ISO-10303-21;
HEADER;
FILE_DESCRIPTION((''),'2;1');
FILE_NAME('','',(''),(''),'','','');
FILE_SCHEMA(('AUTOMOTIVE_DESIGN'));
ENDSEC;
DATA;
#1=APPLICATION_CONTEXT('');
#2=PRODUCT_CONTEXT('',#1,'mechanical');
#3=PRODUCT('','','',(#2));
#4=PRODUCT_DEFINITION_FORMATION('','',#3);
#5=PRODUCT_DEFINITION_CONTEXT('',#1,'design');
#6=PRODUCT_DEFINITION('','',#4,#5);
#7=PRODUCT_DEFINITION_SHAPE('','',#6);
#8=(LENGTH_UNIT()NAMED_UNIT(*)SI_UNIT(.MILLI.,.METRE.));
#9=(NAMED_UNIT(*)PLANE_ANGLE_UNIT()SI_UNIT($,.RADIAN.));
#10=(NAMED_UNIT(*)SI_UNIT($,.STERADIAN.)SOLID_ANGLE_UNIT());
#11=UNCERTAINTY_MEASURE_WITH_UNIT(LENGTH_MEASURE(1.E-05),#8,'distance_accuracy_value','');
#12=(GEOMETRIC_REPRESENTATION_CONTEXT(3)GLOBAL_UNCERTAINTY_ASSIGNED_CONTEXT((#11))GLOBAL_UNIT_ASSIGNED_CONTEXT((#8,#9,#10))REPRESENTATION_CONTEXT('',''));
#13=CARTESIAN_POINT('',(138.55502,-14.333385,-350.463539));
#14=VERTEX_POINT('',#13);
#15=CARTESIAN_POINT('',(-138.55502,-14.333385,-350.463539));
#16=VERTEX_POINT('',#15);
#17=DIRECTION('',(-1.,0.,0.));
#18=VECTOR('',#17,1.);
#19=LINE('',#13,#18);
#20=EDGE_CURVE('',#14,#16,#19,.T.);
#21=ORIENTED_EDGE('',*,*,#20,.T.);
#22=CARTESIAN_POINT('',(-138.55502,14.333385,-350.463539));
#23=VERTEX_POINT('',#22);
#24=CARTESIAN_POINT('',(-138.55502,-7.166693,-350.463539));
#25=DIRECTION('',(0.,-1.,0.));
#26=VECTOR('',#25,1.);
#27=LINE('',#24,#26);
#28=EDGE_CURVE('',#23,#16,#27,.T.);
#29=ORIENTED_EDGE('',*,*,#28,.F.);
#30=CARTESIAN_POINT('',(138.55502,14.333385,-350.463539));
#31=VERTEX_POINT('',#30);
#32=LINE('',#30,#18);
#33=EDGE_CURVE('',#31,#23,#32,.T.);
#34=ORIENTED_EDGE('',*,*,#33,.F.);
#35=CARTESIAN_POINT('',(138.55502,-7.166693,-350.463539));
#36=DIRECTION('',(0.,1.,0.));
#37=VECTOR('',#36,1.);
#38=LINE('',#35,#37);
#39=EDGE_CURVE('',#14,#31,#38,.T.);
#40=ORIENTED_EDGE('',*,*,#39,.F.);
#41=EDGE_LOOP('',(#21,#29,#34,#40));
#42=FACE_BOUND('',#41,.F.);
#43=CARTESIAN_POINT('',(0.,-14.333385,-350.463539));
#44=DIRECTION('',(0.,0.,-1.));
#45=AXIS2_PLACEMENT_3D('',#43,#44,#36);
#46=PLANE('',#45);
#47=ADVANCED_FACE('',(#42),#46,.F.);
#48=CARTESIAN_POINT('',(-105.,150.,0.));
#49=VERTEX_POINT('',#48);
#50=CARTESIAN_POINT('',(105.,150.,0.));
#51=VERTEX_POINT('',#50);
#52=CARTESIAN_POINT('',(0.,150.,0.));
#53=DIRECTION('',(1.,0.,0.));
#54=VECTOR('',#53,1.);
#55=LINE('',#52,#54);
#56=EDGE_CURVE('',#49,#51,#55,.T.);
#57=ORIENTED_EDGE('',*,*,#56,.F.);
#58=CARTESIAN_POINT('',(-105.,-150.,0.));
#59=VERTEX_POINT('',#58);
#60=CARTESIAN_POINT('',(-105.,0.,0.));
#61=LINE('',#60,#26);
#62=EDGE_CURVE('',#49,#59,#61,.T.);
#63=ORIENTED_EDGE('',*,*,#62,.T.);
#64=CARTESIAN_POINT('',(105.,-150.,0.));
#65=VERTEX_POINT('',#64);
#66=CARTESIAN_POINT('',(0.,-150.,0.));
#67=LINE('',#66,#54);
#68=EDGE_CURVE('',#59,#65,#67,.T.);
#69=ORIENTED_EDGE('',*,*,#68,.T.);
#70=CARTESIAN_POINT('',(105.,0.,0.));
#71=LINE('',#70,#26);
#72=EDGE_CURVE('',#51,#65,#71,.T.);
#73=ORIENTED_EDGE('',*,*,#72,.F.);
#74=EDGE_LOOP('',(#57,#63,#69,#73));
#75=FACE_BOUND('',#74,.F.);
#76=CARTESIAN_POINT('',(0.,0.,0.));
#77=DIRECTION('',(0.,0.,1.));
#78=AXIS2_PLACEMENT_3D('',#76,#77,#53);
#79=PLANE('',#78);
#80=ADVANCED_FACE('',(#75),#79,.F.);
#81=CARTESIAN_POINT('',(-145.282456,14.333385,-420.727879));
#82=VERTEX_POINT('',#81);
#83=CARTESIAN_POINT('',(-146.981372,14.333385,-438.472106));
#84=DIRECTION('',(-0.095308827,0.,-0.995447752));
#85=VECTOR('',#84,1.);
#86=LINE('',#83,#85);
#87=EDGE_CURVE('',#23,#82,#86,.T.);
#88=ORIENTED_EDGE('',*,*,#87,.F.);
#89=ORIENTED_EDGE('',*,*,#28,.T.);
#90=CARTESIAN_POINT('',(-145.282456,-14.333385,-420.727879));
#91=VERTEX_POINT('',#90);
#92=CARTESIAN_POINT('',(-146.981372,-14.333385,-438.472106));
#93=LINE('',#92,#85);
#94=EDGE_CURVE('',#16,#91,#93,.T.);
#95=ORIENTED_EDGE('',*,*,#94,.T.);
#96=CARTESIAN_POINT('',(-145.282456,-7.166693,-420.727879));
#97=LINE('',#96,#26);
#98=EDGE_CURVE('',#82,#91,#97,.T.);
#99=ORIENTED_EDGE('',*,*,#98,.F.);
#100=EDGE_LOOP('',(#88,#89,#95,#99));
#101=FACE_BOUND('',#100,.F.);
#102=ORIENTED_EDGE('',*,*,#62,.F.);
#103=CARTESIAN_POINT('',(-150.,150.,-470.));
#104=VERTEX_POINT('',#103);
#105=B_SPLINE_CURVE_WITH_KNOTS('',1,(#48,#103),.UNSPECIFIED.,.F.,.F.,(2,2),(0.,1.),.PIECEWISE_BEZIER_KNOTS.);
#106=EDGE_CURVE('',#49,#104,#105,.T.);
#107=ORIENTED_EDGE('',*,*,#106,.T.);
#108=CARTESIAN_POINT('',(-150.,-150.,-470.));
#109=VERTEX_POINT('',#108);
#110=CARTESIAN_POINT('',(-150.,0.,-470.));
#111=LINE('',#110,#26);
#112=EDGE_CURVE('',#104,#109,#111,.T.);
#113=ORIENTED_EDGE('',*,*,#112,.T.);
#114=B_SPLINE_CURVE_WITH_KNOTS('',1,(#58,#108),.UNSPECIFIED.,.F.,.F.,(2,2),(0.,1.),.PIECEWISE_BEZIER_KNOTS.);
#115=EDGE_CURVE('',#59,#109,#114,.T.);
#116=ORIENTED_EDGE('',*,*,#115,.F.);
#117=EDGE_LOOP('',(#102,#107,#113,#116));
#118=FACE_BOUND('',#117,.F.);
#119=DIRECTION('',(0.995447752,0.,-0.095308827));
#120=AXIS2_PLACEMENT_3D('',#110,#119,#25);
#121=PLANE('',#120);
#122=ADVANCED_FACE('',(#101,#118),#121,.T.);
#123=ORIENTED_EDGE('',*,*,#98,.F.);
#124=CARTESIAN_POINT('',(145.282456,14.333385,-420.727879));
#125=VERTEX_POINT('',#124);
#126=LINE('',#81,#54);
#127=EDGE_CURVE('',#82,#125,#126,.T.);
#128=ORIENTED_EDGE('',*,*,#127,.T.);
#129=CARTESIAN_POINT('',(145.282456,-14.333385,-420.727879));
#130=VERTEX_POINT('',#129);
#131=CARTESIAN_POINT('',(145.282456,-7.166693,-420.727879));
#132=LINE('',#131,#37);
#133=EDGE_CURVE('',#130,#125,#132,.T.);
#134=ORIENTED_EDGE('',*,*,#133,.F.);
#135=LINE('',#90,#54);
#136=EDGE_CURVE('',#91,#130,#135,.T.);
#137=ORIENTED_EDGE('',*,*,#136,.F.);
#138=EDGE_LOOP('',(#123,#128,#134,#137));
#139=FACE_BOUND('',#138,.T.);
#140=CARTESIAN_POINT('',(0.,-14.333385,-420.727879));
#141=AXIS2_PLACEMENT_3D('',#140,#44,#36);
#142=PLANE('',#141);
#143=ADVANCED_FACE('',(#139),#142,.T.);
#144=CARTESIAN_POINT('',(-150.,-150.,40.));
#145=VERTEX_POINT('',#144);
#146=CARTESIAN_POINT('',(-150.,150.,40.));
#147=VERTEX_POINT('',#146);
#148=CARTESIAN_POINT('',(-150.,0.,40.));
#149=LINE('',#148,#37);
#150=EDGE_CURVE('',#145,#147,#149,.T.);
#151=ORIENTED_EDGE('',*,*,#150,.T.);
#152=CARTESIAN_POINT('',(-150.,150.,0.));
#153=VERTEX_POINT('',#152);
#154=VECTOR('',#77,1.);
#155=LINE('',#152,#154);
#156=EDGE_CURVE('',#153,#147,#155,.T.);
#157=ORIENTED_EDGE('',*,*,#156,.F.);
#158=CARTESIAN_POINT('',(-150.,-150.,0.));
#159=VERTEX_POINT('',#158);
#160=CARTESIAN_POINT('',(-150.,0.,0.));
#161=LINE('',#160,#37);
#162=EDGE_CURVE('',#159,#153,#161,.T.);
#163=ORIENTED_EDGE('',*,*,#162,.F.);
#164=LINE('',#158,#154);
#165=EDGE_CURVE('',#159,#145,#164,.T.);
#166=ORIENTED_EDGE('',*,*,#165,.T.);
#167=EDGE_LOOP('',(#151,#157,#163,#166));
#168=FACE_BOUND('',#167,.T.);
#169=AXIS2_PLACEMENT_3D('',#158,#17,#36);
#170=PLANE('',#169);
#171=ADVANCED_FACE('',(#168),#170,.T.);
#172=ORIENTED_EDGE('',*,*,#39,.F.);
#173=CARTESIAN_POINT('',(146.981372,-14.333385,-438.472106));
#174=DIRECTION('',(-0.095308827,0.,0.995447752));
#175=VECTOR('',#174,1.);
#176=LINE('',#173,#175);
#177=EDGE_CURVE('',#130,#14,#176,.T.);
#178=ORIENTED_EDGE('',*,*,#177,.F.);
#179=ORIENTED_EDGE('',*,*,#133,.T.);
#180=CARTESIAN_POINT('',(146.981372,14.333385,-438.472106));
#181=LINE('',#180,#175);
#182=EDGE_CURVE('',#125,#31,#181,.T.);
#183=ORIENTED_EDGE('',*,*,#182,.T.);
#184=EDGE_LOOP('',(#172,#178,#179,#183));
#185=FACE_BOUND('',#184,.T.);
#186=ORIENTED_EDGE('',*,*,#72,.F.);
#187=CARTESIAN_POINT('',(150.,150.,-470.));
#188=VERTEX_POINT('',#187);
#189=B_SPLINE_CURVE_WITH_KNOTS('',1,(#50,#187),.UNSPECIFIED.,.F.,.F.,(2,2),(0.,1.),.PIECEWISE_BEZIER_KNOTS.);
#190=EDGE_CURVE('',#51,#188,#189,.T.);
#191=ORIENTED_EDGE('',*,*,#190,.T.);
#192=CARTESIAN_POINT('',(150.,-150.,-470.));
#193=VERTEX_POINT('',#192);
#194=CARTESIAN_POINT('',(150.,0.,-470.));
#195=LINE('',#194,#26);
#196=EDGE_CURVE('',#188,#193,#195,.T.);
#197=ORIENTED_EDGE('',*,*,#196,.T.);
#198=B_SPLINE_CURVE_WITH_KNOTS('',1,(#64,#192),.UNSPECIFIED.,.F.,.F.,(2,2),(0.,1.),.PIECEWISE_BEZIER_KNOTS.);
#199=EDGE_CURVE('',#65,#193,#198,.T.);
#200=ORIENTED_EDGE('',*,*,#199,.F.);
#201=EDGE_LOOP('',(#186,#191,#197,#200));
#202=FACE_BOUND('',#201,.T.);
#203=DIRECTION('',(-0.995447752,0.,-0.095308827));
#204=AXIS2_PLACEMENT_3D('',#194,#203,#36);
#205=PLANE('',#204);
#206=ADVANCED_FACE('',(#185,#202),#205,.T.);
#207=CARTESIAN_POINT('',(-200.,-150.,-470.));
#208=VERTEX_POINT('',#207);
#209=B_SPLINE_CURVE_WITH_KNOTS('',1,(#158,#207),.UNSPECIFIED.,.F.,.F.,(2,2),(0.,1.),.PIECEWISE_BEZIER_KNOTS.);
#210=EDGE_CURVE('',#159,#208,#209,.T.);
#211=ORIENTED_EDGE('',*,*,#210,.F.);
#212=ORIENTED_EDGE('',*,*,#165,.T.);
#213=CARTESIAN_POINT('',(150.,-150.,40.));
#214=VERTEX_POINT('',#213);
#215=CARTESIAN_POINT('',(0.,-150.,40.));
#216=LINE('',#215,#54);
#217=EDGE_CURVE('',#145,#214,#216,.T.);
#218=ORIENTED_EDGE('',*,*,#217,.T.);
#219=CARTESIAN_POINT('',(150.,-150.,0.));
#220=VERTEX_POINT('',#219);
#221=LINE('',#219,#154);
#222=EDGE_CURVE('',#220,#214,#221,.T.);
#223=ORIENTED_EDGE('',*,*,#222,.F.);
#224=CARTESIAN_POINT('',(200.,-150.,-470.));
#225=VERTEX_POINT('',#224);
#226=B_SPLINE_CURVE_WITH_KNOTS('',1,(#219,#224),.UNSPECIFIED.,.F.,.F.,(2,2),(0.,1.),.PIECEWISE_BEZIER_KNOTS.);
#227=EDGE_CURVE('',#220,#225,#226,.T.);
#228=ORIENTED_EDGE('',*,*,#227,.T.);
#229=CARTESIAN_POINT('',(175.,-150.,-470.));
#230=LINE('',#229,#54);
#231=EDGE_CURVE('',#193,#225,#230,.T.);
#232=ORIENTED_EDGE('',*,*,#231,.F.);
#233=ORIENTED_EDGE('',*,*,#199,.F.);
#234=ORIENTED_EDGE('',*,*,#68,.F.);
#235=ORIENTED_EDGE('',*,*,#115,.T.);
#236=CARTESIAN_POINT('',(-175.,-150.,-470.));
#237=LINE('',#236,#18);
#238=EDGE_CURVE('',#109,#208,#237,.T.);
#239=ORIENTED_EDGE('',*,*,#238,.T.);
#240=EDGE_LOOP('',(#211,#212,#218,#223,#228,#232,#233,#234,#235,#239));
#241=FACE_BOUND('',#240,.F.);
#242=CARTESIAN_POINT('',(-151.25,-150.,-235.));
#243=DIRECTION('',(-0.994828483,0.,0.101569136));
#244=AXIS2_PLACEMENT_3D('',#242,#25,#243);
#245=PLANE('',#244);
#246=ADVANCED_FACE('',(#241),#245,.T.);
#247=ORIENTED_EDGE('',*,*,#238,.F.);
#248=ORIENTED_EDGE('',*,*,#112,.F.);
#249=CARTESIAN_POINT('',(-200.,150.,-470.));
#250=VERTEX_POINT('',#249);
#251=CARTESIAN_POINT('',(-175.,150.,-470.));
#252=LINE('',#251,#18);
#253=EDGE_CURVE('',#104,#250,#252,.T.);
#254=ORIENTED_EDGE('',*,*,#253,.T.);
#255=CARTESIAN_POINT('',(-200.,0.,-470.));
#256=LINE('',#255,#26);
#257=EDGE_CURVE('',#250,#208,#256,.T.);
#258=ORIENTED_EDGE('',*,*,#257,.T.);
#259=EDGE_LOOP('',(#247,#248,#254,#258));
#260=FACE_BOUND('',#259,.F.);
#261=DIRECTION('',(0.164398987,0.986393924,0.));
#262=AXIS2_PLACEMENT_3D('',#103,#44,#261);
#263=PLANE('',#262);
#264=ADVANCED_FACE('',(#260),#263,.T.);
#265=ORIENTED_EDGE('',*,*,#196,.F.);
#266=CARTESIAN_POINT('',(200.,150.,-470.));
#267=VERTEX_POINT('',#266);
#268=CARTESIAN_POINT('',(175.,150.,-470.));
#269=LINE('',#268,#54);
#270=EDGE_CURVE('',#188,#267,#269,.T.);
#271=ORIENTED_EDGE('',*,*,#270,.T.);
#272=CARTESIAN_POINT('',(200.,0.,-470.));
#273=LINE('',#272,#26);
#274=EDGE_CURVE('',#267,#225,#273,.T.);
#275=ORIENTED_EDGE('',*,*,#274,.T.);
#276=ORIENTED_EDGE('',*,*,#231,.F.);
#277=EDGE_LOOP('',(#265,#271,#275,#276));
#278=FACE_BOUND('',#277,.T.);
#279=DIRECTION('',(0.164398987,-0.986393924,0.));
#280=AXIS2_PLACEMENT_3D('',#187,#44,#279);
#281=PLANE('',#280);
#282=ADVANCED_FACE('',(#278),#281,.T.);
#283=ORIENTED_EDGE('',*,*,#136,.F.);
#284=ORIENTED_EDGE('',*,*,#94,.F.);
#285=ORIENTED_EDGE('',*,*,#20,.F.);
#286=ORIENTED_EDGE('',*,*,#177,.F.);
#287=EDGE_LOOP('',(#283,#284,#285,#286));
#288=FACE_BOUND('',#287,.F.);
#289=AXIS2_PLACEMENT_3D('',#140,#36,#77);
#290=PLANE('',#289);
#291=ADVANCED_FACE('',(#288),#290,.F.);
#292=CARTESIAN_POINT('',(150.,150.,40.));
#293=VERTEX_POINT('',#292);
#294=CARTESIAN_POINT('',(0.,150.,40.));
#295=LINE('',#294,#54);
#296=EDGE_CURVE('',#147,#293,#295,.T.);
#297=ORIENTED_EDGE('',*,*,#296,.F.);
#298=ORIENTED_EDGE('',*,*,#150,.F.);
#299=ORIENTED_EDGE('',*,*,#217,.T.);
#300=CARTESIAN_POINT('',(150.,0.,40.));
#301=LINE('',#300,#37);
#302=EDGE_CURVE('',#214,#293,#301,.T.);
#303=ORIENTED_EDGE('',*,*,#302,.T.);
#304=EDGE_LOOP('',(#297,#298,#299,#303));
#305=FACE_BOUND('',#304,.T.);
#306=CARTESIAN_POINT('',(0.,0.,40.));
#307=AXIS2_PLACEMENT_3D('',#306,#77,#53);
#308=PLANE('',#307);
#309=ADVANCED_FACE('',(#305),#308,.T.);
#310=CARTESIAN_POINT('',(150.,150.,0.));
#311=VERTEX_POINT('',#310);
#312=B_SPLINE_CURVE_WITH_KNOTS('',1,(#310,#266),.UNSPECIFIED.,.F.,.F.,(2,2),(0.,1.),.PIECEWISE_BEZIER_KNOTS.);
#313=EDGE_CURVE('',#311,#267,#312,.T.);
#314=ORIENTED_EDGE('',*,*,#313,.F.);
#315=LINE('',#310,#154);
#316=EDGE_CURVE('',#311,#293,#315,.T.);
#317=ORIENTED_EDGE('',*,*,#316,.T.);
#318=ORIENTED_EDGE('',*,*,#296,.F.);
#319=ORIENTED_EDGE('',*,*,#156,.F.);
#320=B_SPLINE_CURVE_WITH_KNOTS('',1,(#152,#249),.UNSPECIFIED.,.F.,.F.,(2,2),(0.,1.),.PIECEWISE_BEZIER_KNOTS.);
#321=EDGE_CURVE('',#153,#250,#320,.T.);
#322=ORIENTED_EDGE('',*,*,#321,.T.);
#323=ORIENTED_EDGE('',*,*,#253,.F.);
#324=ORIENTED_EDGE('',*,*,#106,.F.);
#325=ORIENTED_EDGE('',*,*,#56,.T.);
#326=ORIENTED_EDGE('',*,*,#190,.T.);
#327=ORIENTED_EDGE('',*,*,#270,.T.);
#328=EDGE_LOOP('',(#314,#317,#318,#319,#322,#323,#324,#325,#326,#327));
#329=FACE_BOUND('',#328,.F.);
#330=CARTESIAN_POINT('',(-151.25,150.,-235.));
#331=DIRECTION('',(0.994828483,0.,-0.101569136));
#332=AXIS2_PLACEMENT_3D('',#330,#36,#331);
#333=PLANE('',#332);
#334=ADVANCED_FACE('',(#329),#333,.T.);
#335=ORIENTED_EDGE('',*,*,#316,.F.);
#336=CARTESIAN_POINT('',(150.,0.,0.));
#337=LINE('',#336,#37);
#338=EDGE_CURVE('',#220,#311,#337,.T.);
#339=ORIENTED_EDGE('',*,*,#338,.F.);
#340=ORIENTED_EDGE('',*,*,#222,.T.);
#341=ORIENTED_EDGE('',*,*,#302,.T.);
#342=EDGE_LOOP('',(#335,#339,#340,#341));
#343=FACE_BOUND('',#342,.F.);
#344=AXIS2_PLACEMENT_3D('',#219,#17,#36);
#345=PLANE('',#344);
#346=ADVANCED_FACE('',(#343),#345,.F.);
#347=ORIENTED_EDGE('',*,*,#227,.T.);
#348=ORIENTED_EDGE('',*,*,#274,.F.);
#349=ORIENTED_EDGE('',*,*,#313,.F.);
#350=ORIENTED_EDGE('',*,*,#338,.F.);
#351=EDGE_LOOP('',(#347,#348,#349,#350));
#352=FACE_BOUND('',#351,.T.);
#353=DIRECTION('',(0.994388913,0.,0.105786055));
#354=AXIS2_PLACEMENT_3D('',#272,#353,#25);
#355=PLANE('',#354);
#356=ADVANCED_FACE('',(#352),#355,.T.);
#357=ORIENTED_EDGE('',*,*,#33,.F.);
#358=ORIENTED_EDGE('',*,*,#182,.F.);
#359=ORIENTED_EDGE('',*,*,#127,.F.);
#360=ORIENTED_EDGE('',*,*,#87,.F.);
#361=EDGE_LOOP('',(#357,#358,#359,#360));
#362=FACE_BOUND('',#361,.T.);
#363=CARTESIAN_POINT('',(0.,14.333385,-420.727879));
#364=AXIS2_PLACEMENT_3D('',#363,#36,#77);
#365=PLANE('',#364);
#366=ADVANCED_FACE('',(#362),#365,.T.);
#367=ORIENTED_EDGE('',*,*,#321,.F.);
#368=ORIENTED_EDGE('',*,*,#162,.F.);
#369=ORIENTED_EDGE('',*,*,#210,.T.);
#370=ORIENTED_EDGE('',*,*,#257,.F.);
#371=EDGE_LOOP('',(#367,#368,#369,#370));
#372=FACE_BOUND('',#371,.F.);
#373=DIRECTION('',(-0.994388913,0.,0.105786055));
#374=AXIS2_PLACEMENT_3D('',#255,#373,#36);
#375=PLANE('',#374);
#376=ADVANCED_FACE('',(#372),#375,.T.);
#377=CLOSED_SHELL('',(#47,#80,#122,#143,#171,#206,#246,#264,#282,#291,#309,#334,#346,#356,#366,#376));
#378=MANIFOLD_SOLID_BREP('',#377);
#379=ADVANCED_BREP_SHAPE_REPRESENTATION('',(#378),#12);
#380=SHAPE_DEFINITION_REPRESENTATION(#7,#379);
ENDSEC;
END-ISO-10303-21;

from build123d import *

# Parameters (mm, degrees)
F0_W          = 300
F0_H          = 300
F1_DEPTH      = 40
F4_W          = 45
F4_H          = 300
F3_W          = 50
F3_H          = 300
F7_W          = 28.6667700857
F7_H          = 70.264339447
F8_DEPTH      = 150
F8_DEPTH_BACK = 150


# Not quite as in the source:
# - an extrude ends at something that could not be found from the text; its depth is read off the source's solid


with BuildPart() as f1:
    # F0 (on Top) → F1 (new body)
    with BuildSketch(Plane.XY):
        Rectangle(F0_W, F0_H)
    extrude(amount=F1_DEPTH)

    # F4 (on face) → F5 section 0
    with BuildSketch(Plane(origin=(0, 0, 0), x_dir=(1, 0, 0), z_dir=(0, 0, -1))):
        with Locations((127.5, 0)):
            Rectangle(F4_W, F4_H)
    # F3 (on offset) → F5 section 1
    with BuildSketch(Plane(origin=(0, 0, -470), x_dir=(1, 0, 0), z_dir=(0, 0, -1))):
        with Locations((175, 0)):
            Rectangle(F3_W, F3_H)
    loft()

    # F6: F1 across plane


with BuildPart() as f1_1:
    add(f1.part)
    add(f1.part.mirror(Plane.YZ))

    # F7 (on Right) → F8 (join, two sides)
    with BuildSketch(Plane.YZ) as f8_sk:
        with Locations((0, -385.5957090855)):
            Rectangle(F7_W, F7_H)
    extrude(amount=F8_DEPTH)
    extrude(f8_sk.sketch, amount=-F8_DEPTH_BACK)


solid = f1_1.part
